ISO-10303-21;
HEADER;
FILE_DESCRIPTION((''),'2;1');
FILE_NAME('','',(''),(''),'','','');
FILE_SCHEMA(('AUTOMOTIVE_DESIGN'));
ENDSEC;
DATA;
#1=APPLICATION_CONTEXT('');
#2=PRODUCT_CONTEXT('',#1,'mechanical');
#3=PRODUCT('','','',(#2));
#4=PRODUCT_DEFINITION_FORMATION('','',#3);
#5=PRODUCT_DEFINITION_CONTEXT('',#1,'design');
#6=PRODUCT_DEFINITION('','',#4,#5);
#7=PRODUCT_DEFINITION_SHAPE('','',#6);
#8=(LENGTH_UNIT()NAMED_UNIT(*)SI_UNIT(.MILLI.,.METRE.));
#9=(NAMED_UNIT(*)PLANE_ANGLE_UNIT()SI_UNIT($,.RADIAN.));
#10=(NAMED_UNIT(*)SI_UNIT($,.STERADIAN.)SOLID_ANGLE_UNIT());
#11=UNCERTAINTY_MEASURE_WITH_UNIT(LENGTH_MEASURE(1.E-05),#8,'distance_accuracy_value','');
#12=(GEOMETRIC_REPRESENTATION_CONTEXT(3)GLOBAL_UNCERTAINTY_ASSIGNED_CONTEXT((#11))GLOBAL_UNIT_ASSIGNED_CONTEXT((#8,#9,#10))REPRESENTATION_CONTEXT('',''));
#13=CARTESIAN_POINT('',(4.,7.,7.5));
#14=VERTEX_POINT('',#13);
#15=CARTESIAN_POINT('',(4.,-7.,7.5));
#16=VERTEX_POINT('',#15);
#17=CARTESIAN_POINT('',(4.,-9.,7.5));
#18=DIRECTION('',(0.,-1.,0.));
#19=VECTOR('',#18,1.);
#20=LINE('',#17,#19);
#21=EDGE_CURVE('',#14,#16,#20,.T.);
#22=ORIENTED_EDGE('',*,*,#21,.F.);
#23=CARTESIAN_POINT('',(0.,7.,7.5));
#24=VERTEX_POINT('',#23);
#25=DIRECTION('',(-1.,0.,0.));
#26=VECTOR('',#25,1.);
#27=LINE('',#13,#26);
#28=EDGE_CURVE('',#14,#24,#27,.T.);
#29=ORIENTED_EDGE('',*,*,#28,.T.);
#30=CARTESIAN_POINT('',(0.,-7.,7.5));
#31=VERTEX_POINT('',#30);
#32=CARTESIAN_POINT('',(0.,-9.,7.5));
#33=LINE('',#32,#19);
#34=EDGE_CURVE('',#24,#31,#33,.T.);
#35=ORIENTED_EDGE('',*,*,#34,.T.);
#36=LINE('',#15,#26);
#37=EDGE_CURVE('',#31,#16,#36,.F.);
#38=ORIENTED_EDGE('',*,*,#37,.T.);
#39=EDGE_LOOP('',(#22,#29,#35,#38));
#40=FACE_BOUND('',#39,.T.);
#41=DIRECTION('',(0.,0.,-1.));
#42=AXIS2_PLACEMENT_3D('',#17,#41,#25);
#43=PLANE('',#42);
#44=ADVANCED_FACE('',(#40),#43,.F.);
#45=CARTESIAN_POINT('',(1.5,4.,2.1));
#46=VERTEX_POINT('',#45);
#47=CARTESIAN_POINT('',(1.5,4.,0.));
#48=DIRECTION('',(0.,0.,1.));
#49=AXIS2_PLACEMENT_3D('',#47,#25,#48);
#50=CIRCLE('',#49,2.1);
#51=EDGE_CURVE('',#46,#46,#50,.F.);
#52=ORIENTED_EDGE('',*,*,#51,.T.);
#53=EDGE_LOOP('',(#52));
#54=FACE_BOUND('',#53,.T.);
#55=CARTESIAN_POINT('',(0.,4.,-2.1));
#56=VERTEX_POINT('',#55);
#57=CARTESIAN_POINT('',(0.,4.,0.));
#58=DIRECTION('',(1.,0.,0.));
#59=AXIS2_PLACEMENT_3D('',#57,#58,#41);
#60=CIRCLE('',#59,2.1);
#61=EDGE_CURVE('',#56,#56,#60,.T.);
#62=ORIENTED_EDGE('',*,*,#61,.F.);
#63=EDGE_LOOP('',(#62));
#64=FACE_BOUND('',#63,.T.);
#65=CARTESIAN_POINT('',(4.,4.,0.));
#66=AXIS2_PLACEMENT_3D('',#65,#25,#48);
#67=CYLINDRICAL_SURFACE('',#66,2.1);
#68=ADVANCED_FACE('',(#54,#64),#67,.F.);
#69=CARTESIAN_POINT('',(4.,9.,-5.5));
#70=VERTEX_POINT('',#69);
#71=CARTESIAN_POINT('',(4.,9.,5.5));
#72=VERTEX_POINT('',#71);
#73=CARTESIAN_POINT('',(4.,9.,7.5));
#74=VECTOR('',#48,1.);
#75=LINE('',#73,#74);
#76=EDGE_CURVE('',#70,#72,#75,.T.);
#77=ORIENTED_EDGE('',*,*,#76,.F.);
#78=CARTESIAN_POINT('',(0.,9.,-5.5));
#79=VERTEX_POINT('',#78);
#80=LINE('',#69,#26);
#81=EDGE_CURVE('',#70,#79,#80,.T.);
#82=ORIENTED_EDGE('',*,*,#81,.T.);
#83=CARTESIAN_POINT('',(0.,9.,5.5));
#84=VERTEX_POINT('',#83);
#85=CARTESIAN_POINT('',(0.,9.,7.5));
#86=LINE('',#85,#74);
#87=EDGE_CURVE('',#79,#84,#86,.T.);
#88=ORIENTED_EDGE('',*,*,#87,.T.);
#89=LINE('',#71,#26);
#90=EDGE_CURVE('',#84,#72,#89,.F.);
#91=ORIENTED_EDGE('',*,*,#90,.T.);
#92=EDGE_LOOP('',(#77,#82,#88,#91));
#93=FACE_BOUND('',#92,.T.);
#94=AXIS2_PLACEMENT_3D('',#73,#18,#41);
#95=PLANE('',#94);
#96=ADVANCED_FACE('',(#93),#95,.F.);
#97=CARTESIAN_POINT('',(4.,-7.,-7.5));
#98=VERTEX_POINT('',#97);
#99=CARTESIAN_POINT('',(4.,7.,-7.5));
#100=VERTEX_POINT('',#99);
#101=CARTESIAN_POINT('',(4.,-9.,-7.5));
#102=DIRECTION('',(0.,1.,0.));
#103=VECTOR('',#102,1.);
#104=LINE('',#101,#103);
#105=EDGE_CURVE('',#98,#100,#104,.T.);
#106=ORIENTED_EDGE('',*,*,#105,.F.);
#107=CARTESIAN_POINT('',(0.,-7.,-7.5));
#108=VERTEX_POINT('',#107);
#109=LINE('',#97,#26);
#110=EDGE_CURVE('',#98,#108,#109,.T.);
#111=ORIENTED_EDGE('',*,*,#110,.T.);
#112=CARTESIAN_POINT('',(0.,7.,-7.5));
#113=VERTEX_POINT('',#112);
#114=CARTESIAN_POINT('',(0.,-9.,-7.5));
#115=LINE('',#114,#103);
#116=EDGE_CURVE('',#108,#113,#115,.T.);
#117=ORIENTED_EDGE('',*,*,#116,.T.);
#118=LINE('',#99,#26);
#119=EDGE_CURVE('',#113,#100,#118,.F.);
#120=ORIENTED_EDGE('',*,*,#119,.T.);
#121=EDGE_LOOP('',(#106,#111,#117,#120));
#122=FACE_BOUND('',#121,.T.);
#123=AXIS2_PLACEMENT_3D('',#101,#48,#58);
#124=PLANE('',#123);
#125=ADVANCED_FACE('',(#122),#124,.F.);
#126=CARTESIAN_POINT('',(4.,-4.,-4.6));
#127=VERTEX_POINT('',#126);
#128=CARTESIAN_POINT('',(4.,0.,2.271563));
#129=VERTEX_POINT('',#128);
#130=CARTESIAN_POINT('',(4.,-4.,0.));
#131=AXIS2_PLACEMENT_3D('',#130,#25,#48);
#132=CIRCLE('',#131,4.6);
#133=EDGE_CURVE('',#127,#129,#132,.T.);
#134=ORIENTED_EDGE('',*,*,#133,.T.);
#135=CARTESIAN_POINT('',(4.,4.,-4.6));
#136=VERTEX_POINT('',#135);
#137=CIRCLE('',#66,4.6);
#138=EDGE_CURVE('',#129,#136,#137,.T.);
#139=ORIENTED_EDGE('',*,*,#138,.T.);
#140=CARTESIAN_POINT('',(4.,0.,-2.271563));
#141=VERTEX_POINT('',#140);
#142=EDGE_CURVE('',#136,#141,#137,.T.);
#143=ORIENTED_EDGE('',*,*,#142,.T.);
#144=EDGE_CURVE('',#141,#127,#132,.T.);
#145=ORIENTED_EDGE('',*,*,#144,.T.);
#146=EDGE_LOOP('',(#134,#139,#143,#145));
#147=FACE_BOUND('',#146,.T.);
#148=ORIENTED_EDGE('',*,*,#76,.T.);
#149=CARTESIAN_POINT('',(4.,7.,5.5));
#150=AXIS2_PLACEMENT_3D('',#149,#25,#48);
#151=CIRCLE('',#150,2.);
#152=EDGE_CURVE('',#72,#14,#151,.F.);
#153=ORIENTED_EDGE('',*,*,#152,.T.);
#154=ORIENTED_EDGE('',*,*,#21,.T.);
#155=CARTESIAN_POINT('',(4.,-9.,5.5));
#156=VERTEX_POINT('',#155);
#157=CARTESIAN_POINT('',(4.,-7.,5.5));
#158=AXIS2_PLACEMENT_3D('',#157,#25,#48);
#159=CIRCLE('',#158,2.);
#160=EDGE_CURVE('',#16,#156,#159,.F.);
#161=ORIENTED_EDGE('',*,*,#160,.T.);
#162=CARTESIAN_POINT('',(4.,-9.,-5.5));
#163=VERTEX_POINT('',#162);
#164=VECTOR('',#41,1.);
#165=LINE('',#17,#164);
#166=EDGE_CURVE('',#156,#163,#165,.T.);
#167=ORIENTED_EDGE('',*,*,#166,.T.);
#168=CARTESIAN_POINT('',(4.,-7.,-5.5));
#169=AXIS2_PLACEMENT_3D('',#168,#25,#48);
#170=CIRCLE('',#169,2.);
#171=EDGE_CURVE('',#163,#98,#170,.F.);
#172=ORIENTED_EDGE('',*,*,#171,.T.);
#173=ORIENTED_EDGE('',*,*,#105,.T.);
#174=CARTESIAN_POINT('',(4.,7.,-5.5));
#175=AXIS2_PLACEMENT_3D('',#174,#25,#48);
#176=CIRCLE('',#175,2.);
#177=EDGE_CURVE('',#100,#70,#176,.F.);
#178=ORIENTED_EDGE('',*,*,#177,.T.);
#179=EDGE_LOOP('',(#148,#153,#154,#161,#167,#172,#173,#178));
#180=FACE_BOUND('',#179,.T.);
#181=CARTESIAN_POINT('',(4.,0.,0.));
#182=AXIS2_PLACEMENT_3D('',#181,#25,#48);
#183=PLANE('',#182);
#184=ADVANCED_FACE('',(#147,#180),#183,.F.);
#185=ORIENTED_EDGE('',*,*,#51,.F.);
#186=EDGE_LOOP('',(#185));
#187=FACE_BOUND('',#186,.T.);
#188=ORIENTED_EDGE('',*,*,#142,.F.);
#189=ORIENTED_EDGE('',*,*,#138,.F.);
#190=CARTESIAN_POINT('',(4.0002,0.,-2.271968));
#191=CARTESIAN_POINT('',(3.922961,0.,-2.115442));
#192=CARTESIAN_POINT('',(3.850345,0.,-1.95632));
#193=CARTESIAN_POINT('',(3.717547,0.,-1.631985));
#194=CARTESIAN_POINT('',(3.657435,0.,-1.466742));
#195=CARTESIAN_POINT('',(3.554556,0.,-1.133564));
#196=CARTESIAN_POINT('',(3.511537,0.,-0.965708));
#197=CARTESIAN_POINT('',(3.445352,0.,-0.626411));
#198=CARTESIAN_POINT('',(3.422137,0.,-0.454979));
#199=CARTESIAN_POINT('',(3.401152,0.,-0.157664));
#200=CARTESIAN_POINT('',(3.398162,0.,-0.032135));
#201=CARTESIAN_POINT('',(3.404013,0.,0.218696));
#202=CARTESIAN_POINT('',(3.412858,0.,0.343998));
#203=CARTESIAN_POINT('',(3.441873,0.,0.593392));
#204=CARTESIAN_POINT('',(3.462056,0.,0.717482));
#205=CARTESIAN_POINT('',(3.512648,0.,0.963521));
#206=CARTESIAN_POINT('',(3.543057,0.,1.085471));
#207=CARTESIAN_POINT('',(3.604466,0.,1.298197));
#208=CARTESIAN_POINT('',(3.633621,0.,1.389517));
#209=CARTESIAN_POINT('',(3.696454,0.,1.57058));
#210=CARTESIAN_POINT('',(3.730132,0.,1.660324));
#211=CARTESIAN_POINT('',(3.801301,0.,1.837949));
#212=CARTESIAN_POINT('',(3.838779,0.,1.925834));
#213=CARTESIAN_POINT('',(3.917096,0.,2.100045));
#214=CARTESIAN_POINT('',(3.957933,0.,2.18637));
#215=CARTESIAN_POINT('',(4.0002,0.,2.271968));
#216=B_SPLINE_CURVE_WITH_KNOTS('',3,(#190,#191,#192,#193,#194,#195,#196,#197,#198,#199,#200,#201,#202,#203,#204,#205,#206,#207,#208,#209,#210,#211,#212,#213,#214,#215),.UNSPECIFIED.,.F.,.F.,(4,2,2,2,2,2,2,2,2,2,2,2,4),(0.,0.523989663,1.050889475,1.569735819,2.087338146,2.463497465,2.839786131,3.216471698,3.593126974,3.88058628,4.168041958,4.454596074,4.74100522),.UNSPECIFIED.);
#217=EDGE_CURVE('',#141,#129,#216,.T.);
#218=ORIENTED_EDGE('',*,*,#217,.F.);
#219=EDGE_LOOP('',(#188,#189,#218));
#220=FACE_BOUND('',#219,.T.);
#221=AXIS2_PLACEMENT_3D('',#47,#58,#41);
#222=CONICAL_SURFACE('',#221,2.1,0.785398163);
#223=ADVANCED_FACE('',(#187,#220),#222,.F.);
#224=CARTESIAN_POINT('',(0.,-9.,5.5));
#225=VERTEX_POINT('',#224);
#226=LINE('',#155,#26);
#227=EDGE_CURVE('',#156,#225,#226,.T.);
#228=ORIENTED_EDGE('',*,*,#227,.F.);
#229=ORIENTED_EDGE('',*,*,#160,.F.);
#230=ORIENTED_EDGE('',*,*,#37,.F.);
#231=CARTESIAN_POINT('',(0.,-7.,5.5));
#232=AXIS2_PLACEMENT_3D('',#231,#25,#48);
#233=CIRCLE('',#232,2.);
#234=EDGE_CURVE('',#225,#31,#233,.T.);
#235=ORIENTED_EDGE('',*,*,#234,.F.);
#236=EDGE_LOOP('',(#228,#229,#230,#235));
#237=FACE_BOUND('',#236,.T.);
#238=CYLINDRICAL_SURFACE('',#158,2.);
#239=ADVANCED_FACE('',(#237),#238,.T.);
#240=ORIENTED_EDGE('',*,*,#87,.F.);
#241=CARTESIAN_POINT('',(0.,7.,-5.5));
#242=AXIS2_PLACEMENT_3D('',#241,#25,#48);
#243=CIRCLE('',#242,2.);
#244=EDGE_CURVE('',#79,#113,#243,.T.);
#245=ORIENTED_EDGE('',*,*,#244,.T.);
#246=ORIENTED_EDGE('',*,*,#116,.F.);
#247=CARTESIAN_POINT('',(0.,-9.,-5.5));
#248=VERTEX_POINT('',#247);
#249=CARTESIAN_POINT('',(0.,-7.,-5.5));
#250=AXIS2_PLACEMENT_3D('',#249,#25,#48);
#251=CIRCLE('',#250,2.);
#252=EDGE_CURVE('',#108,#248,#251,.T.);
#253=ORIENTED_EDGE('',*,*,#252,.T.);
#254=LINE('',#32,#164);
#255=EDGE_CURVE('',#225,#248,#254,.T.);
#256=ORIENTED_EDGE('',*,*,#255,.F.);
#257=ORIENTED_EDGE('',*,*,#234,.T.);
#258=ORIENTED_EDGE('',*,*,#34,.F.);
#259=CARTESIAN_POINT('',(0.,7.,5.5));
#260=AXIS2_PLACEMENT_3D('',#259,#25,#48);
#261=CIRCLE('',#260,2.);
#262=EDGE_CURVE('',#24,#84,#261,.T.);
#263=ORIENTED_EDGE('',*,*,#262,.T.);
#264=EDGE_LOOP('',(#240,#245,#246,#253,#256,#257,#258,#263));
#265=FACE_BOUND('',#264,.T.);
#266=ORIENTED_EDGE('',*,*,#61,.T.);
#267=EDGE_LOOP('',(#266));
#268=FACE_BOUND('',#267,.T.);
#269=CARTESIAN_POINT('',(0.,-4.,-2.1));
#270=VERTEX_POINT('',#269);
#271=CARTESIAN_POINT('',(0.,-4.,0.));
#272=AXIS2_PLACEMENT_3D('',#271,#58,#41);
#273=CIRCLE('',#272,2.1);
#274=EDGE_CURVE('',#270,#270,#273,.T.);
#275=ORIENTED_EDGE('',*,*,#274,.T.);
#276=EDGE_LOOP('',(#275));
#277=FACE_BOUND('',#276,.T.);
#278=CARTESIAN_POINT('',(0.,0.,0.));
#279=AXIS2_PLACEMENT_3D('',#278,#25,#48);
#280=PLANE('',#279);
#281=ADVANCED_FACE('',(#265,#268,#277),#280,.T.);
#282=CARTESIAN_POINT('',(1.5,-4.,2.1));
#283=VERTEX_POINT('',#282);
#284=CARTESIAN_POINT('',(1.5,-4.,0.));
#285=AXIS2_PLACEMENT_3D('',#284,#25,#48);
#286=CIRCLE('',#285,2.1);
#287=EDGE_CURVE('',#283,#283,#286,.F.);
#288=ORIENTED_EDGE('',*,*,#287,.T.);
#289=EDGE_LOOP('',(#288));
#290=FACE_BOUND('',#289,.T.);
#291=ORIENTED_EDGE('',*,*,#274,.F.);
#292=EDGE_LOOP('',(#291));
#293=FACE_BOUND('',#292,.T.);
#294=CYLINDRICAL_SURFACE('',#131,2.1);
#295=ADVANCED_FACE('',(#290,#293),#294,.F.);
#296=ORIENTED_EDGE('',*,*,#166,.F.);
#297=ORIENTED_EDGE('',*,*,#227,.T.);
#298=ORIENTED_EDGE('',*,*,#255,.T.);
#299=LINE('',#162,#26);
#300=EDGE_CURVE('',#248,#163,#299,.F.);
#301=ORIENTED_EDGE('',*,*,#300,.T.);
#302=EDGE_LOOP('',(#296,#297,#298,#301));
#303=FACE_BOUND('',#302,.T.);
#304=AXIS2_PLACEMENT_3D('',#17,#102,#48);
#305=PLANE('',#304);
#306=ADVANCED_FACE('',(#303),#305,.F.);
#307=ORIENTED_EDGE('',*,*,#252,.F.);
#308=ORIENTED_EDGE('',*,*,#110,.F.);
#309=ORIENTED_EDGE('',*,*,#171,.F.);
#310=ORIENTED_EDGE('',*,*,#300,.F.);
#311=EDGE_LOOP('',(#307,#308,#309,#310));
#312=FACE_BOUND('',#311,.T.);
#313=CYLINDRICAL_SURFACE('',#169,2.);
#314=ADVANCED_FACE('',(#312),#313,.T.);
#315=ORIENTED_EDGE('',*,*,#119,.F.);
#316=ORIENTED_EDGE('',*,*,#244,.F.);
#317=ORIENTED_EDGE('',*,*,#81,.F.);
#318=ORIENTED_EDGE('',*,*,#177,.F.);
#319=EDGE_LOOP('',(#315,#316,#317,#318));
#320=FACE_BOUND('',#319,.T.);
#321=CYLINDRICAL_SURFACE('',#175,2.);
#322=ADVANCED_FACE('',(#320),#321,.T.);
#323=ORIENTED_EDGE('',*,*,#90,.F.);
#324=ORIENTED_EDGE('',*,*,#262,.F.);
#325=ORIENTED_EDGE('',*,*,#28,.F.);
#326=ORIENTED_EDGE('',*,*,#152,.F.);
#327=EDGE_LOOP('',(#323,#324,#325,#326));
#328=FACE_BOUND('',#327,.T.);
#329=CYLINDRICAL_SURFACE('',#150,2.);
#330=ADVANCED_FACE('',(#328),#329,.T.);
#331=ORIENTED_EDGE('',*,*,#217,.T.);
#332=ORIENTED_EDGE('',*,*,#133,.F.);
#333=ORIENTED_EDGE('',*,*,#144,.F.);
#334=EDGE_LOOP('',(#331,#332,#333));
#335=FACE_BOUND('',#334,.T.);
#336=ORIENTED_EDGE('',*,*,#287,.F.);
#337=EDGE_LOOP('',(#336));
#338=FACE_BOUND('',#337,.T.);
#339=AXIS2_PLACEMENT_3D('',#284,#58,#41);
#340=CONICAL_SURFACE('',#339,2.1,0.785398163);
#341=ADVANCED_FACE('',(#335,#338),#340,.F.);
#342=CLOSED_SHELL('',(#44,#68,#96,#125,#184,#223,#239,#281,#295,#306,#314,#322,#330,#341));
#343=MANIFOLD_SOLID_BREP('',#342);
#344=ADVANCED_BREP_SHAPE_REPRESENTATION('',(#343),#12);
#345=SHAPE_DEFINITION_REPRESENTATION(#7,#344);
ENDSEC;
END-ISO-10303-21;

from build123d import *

# Parameters (mm, degrees)
SKETCH4_W           = 15
SKETCH4_H           = 18
SKETCH4_R           = 2.1
BOSS_EXTRUDE1_DEPTH = 4
FILLET1_R           = 2
CHAMFER1_SIZE       = 2.5


with BuildPart() as part:
    # Sketch4 → Boss-Extrude1 (new body)
    with BuildSketch(Plane(origin=(0, 0, 0), x_dir=(0, 0, -1), z_dir=(1, 0, 0))):
        Rectangle(SKETCH4_W, SKETCH4_H)
        with Locations((0, 4)):
            Circle(SKETCH4_R, mode=Mode.SUBTRACT)
        with Locations((0, -4)):
            Circle(SKETCH4_R, mode=Mode.SUBTRACT)
    extrude(amount=BOSS_EXTRUDE1_DEPTH)

    # Fillet1
    fillet1_edges = [part.edges().sort_by_distance(p)[0] for p in [
        (2, -9, -7.5),
        (2, -9, 7.5),
        (2, 9, 7.5),
        (2, 9, -7.5),
    ]]
    fillet(fillet1_edges, radius=FILLET1_R)

    # Chamfer1
    # the kernel refuses this chamfer: 2.5 mm, written as the material it takes off along each edge
    with BuildSketch(Plane(origin=(4, 4, 0), x_dir=(0, 0, -1), z_dir=(0, -1, 0))) as chamfer1_piece_1:
        Polygon((2.1 + CHAMFER1_SIZE, 0), (2.1, -CHAMFER1_SIZE), (2.1, 0), align=None)
    revolve(axis=Axis((4, 4, 0), (1, 0, 0)), mode=Mode.SUBTRACT)
    with BuildSketch(Plane(origin=(4, -4, 0), x_dir=(0, 0, -1), z_dir=(0, -1, 0))) as chamfer1_piece_2:
        Polygon((2.1 + CHAMFER1_SIZE, 0), (2.1, -CHAMFER1_SIZE), (2.1, 0), align=None)
    revolve(axis=Axis((4, -4, 0), (1, 0, 0)), mode=Mode.SUBTRACT)


solid = part.part
